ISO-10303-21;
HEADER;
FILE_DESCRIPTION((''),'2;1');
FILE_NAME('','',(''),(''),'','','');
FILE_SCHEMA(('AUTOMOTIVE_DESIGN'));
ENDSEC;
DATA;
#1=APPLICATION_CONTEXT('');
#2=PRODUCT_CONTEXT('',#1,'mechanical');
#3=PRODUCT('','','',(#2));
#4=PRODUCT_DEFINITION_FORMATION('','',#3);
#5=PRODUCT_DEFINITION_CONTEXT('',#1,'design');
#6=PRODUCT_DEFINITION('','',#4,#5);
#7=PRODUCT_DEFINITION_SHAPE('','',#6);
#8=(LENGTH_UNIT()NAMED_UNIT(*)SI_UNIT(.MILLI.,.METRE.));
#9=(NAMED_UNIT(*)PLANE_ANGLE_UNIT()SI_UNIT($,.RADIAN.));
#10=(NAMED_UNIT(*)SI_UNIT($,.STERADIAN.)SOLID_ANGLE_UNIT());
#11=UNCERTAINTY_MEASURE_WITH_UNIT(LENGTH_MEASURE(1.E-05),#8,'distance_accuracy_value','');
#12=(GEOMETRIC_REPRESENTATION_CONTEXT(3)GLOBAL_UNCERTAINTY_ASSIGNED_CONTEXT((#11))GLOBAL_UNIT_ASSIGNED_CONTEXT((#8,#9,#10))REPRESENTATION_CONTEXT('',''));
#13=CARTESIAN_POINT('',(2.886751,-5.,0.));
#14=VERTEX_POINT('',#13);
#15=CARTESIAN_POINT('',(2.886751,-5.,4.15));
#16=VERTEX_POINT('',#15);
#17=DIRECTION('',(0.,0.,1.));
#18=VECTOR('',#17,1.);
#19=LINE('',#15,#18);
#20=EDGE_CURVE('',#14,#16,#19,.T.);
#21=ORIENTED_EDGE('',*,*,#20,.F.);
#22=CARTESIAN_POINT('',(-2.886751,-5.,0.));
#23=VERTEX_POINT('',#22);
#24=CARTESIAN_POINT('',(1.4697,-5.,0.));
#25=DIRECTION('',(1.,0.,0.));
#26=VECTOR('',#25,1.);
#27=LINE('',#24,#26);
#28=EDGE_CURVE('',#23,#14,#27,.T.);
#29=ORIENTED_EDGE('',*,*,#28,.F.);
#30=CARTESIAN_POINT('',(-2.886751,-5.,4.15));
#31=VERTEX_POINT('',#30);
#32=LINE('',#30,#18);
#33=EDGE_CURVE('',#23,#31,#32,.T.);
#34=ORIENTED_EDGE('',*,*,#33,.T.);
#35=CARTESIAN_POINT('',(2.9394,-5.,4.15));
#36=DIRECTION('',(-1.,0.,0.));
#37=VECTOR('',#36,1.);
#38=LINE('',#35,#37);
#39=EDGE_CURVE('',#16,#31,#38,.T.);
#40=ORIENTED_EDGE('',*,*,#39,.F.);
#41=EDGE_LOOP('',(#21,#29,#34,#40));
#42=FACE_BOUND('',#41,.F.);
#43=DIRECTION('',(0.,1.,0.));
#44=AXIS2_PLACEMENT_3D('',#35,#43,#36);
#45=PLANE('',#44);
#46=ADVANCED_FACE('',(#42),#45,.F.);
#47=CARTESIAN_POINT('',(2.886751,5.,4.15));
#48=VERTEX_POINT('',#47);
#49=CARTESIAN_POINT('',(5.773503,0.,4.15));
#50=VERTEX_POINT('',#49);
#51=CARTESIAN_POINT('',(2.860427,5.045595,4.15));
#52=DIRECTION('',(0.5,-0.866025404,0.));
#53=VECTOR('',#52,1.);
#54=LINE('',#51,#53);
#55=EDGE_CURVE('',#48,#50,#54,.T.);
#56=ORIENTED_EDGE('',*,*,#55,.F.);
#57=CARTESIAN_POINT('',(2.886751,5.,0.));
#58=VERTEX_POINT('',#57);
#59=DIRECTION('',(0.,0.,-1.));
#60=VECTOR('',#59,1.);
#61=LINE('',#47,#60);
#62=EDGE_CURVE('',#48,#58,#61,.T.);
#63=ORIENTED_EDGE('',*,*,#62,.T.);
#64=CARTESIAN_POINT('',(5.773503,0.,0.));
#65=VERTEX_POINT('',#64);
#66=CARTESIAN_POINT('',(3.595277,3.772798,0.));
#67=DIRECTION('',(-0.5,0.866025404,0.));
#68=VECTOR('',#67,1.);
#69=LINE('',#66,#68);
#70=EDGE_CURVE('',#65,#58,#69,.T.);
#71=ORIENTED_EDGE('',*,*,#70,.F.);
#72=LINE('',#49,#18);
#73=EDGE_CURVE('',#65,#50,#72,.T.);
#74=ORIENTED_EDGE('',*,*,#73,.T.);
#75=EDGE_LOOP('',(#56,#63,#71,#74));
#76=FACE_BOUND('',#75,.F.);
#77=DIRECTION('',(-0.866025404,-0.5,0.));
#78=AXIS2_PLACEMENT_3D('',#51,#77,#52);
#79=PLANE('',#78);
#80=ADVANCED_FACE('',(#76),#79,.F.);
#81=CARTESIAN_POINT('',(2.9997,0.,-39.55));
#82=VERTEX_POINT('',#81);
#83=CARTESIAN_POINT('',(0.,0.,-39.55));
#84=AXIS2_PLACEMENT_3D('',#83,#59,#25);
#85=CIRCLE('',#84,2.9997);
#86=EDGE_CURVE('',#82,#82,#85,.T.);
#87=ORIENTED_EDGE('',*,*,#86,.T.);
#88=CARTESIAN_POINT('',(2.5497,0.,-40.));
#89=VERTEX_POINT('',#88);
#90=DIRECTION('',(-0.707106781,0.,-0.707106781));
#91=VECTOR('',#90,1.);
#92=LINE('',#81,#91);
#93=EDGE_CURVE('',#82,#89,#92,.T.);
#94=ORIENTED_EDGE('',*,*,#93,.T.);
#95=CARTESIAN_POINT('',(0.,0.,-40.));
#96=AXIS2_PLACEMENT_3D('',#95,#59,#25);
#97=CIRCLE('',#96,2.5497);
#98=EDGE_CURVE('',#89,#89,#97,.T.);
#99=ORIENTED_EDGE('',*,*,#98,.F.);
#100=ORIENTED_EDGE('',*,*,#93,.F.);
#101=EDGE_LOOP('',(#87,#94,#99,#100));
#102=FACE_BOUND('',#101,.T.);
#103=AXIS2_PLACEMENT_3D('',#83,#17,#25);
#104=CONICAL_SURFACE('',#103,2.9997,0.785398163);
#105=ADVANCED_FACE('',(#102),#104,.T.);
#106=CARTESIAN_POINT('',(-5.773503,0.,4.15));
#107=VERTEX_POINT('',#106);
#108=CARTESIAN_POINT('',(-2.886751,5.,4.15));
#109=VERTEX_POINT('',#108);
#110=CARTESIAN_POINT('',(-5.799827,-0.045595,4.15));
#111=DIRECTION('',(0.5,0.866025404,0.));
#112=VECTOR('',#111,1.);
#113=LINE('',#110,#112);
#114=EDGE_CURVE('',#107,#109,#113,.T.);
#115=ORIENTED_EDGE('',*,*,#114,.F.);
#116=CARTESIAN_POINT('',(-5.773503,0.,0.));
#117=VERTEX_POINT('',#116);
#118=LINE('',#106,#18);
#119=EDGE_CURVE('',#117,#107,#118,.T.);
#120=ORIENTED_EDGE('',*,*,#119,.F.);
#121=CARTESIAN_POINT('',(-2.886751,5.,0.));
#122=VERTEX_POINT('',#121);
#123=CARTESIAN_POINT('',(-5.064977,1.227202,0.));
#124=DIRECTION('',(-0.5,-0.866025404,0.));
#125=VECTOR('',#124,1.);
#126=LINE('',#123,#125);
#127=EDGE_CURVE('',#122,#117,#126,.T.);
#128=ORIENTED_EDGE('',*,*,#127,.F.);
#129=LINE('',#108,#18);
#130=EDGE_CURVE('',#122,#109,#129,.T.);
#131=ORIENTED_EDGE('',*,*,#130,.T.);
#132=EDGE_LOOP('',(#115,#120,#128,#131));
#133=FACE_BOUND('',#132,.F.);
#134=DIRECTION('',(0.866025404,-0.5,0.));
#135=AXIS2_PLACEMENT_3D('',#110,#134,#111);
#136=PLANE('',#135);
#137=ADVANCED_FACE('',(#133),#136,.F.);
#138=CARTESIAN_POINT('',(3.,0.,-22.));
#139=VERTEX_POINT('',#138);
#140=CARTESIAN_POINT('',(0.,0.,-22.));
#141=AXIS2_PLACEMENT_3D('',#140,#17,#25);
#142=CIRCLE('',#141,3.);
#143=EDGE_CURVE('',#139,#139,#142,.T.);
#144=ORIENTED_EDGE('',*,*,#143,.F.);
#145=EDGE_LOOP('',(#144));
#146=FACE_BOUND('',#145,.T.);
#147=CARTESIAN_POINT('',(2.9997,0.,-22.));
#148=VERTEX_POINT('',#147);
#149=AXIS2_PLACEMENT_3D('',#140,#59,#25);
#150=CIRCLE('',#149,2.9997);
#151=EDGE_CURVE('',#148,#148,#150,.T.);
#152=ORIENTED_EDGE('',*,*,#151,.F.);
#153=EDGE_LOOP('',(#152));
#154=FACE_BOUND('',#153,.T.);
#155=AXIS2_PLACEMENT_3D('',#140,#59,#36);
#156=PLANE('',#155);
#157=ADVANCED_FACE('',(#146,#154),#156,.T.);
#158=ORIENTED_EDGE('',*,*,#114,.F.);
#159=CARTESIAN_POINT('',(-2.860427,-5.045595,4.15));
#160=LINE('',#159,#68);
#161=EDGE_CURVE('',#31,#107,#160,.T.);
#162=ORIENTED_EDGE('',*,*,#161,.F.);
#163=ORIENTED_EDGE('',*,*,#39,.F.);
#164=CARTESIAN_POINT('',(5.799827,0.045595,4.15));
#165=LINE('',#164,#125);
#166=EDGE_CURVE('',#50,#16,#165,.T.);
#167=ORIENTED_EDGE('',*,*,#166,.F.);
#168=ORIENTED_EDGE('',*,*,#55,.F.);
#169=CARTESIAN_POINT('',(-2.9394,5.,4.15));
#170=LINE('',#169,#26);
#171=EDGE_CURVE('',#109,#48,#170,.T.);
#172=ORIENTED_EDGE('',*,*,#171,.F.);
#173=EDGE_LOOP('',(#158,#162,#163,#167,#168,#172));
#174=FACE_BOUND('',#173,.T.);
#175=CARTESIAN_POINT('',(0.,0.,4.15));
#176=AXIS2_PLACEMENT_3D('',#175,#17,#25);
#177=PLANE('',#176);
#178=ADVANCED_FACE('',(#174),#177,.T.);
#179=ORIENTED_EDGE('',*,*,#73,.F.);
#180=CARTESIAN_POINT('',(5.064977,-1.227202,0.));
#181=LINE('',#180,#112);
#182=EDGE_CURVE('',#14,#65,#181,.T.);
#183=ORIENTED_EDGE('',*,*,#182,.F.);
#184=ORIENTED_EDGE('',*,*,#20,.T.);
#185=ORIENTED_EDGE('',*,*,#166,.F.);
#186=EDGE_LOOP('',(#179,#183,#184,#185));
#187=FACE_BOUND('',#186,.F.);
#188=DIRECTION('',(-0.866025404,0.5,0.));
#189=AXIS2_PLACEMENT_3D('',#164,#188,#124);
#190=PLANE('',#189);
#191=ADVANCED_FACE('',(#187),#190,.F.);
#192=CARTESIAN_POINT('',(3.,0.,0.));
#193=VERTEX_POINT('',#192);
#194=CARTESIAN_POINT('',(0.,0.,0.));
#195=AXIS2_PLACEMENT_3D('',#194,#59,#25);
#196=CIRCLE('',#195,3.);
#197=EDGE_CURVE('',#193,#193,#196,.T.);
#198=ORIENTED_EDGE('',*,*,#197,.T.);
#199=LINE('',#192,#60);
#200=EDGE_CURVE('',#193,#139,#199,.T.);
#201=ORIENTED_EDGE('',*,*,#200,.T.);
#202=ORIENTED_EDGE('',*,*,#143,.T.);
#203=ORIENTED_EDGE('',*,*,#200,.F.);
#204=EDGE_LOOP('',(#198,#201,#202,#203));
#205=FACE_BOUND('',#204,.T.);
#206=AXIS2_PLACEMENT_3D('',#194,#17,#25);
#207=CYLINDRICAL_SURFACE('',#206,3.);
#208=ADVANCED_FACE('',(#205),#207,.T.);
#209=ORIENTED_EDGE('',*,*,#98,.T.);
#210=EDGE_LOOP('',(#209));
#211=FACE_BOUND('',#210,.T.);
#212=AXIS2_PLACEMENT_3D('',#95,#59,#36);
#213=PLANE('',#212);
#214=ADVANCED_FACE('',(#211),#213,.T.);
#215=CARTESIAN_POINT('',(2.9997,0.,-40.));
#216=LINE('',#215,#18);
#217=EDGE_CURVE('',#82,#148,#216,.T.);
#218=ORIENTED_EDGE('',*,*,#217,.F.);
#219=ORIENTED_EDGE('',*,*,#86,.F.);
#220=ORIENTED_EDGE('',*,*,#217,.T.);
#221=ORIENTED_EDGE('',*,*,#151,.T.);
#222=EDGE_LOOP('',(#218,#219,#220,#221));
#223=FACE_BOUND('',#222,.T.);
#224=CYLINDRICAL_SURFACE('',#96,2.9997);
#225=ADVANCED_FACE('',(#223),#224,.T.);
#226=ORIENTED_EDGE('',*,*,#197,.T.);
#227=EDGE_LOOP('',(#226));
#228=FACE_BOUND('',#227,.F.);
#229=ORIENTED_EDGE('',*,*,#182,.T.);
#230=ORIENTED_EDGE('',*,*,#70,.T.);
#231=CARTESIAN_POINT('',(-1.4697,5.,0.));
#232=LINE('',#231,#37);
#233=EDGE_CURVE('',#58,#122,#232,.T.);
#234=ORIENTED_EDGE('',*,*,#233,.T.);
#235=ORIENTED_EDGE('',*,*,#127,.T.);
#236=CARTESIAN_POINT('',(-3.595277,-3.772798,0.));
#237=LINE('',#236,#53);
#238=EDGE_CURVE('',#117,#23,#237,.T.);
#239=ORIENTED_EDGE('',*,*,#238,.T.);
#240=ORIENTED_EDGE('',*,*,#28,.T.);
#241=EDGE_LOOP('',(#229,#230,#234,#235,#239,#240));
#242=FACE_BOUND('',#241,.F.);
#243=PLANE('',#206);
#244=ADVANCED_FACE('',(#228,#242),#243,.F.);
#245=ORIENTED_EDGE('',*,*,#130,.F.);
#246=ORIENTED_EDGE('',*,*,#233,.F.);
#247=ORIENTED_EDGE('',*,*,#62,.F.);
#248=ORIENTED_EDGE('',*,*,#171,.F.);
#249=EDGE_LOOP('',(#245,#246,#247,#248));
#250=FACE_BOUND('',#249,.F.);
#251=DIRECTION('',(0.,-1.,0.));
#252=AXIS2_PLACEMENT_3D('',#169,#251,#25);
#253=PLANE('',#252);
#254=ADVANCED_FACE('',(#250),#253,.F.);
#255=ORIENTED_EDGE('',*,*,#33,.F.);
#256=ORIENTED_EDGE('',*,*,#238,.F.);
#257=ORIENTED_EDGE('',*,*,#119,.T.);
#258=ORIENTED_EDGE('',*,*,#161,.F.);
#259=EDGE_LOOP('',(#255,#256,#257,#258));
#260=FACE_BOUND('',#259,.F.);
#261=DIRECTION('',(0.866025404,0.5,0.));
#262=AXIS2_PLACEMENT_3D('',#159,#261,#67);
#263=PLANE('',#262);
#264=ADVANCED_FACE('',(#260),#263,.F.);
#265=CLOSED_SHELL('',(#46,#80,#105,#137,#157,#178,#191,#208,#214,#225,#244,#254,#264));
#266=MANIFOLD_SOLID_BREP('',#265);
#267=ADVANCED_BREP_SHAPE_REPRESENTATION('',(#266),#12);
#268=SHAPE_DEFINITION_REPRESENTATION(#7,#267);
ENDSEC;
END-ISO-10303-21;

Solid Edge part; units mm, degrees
sketch "Sketch1" plane through (0, 0, 0) normal (0, 0, 1) x (1, 0, 0)
  circle A0 centre (0, 0) radius 5.8
  dimension "D1" = 11.6
extrude "Protrusion1" add sketch "Sketch1" along normal blind 4.15
sketch "Sketch2" plane through (0, 0, 0) normal (0, 0, -1) x (1, 0, 0)
  circle A0 centre (0, 0) radius 3
extrude "Protrusion2" add sketch "Sketch2" along normal blind 40
sketch "Sketch3" plane through (0, 0, -40) normal (0, 0, -1) x (1, 0, 0)
  circle A0 centre (0, 0) radius 2.9997
extrude "Cutout1" cut sketch "Sketch3" against normal blind 18 flip side to cut
chamfer "Chamfer_1" distance 0.45 angle 45 1 edges at (-2.9997, 0, -40)
sketch "Sketch4" plane through (0, 0, 4.15) normal (0, 0, 1) x (1, 0, 0)
  line L0 (-2.9394, 5) -> (2.9394, 5)
  dimension "D1" = 10
extrude "Cutout2" cut sketch "Sketch4" against normal up to next material side at (0, 5.05, 4.15)
pattern_circular "Pattern1" count 6 over 360 about axis through (0, 0, 4.15) along (0, 0, 1) of "Cutout2"
properties part number "118179"
